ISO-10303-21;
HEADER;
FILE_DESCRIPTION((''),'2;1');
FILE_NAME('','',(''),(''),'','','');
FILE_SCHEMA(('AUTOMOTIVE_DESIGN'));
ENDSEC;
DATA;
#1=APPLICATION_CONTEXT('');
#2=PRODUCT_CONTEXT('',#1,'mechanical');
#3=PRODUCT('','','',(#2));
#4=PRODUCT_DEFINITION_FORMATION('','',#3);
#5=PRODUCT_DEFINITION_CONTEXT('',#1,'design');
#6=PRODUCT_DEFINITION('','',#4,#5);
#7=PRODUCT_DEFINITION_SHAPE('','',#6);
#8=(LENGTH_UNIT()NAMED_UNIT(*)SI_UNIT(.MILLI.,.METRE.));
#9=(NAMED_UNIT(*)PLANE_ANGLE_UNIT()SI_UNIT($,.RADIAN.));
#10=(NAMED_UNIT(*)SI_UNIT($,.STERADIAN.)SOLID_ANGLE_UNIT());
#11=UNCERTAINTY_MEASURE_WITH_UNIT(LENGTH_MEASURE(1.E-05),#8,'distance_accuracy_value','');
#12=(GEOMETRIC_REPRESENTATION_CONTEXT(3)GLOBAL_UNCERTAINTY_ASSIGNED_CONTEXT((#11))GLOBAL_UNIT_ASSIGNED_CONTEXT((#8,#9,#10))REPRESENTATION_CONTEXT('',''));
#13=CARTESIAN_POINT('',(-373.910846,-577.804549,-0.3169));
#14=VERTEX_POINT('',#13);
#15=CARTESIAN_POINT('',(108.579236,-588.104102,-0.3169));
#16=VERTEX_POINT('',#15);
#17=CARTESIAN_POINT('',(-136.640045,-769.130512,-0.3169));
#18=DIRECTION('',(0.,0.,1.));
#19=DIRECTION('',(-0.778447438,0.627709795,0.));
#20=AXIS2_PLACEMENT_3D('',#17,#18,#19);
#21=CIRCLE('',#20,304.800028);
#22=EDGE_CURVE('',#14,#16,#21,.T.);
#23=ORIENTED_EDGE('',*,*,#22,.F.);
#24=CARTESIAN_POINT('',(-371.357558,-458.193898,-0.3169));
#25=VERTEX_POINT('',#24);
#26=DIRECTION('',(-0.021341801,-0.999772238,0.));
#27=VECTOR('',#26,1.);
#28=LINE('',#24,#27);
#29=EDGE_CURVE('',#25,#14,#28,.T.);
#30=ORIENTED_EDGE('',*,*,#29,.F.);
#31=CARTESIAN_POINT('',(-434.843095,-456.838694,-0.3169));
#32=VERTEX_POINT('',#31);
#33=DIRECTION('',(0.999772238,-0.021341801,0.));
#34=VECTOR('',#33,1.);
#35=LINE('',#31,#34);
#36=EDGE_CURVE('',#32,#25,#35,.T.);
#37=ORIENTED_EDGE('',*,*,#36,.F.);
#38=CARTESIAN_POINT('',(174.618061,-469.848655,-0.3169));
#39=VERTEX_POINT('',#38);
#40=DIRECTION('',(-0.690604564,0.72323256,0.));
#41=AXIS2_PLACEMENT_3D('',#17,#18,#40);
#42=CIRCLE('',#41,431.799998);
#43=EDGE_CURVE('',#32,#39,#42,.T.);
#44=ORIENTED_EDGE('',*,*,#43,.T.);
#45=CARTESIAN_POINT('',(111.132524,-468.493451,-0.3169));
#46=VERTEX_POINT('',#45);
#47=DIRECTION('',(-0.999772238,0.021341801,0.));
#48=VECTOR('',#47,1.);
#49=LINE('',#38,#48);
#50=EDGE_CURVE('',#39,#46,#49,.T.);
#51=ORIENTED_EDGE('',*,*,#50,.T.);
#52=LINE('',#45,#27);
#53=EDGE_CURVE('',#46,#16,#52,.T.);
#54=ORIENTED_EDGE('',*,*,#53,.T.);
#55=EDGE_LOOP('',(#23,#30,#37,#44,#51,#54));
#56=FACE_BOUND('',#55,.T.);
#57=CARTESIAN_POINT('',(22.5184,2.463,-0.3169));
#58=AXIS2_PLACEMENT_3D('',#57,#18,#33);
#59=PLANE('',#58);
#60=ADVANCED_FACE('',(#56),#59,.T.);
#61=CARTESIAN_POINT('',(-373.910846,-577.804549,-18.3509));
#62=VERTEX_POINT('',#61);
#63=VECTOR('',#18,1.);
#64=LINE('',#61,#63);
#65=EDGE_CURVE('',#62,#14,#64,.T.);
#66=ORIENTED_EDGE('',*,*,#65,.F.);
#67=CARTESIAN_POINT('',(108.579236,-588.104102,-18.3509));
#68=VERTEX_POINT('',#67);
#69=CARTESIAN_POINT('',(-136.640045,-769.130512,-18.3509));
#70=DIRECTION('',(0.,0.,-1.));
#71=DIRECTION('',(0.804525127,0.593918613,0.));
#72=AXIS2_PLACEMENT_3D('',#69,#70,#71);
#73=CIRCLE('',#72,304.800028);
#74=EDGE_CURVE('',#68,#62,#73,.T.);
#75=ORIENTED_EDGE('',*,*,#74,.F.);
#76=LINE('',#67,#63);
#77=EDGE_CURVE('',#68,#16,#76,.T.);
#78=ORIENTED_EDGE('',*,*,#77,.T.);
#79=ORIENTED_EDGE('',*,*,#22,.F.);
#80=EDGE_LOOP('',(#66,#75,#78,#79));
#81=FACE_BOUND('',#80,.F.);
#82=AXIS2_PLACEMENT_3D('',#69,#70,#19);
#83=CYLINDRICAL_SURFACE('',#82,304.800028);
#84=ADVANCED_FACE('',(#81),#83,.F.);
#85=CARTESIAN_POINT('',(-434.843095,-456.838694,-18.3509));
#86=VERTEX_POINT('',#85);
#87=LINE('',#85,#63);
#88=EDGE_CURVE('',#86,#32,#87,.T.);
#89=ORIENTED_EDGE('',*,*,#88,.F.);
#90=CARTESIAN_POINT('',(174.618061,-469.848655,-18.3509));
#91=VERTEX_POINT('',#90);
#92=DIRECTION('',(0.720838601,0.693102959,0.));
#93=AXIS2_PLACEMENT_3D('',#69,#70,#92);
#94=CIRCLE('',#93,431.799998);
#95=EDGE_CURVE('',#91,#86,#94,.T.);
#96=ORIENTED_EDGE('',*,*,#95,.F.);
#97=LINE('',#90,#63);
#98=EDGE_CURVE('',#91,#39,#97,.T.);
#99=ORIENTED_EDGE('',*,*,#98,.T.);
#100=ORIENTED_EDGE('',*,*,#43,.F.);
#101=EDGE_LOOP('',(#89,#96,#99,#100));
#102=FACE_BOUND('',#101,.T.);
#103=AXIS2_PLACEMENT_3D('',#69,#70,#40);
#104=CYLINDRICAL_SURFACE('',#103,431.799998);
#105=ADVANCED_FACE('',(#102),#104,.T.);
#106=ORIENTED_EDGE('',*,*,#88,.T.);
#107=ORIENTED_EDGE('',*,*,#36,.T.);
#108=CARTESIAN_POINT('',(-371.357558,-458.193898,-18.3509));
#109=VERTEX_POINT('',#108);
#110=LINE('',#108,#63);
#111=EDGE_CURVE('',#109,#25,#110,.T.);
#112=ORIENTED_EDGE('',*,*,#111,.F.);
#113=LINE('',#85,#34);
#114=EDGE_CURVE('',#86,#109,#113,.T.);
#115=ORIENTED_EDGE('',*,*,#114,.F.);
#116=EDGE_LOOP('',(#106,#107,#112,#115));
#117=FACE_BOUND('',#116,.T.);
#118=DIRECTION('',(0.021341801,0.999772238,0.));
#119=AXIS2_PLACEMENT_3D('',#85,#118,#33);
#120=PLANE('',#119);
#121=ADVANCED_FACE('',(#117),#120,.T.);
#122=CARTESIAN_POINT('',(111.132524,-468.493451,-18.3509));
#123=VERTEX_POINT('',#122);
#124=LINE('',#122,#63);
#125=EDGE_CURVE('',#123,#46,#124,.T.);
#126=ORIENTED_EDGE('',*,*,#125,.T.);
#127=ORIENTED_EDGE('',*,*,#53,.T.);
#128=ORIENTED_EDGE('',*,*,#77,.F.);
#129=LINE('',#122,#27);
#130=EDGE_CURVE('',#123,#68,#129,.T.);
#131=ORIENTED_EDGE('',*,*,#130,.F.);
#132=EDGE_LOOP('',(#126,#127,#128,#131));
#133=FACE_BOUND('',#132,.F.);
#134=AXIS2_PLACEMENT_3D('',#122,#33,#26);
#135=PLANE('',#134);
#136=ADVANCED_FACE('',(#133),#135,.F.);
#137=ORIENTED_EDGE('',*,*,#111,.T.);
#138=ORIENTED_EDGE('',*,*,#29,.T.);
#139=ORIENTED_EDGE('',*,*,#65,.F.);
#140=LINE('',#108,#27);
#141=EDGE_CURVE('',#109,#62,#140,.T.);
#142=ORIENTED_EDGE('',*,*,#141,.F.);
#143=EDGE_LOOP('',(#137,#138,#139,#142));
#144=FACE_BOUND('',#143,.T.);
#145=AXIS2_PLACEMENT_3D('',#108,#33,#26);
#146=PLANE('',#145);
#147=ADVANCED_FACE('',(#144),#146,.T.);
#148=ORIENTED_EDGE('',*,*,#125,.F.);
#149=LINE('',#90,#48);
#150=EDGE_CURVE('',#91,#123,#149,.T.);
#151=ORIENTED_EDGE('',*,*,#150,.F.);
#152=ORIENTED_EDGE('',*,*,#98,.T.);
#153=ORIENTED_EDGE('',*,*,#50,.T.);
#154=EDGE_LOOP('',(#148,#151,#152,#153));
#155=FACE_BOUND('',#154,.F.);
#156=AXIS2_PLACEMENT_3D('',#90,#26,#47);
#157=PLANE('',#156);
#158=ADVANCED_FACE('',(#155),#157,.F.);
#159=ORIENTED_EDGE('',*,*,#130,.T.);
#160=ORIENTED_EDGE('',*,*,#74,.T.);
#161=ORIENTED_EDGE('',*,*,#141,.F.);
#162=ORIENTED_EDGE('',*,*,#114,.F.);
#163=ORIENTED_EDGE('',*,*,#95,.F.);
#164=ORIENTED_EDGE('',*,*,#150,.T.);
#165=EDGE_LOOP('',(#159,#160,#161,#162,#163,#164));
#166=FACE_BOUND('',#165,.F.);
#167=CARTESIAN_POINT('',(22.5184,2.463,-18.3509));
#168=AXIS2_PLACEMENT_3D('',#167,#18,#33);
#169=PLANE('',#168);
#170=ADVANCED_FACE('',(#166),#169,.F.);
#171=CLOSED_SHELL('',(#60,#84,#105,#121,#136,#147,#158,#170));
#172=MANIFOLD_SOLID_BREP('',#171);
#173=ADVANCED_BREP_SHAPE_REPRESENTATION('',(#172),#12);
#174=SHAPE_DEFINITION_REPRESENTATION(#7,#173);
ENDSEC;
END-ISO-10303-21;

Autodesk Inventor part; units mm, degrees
ref_plane "YZ Plane" through (0, 0, 0) normal (1, 0, 0) x (0, 1, 0)
ref_plane "XZ Plane" through (0, 0, 0) normal (0, 1, 0) x (-1, 0, 0)
ref_plane "XY Plane" through (0, 0, 0) normal (0, 0, 1) x (1, 0, 0)
ref_plane "Work Plane1" through (22.5184, 2.463, -18.3509) normal (0, 0, 1) x (0.9997722, -0.0213418, 0)
sketch "ThermoBulbBorder" plane through (22.5184, 2.463, -18.3509) normal (0, 0, 1) x (0.9997722, -0.0213418, 0)
  arc A0 (-447.455, -468.958) -> (162.145, -468.958) centre (-142.655, -774.8145) ccw
  arc A1 (-447.455, -468.958) -> (162.145, -468.958) centre (-142.655, -774.8145) ccw
  arc A2 (-383.955, -588.5959) -> (98.645, -588.5959) centre (-142.655, -774.8145) ccw
  line L0 (-447.455, -468.958) -> (-383.955, -468.958)
  line L1 (-383.955, -468.958) -> (-383.955, -588.5959)
  line L2 (162.145, -468.958) -> (98.645, -468.958)
  line L3 (98.645, -468.958) -> (98.645, -588.5959)
  line L4 (-383.955, -961.033) -> (-484.4967, -1038.6241)
  line L5 (98.645, -961.033) -> (199.1867, -1038.6241)
  arc A3 (-447.455, -468.958) -> (162.145, -468.958) centre (-142.655, -774.8145) ccw projected
  circle A4 centre (-142.655, -774.8145) radius 419.1 construction
  circle A5 centre (-142.655, -774.8145) radius 410.972 construction
  circle A6 centre (-142.655, -774.8145) radius 353.822 construction
  circle A7 centre (-142.655, -774.8145) radius 345.694 construction
  line L6 (98.645, -468.958) -> (98.645, -316.558) construction
  line L7 (-383.955, -468.958) -> (-383.955, -316.558) construction
  dimension "d0" = 609.6
  dimension "d5" = 63.5
  dimension "d6" = 63.5
  dimension "d7" = 838.2
  dimension "d8" = 8.128
  dimension "d9" = 8.128
  dimension "d10" = 57.15
  dimension "d11" = 40.894
  dimension "d12" = 152.4
extrude "Sides" add sketch "ThermoBulbBorder" along normal blind 18.034 contours L0 L1 A2 L4 A0 | L5 A2 L3 L2 A0
extrude "Extrusion2" add sketch "ThermoBulbBorder" along normal blind 18.034 contours L4 A2 L5 A0
equation "\"d6\" = d5"
equation "\"d8\" = sRopeChannel"
equation "\"d9\" = sRopeChannel"
equation "\"sRopeChannel\" = 8.128"
properties part number "HOT Thermo bulb outline"
